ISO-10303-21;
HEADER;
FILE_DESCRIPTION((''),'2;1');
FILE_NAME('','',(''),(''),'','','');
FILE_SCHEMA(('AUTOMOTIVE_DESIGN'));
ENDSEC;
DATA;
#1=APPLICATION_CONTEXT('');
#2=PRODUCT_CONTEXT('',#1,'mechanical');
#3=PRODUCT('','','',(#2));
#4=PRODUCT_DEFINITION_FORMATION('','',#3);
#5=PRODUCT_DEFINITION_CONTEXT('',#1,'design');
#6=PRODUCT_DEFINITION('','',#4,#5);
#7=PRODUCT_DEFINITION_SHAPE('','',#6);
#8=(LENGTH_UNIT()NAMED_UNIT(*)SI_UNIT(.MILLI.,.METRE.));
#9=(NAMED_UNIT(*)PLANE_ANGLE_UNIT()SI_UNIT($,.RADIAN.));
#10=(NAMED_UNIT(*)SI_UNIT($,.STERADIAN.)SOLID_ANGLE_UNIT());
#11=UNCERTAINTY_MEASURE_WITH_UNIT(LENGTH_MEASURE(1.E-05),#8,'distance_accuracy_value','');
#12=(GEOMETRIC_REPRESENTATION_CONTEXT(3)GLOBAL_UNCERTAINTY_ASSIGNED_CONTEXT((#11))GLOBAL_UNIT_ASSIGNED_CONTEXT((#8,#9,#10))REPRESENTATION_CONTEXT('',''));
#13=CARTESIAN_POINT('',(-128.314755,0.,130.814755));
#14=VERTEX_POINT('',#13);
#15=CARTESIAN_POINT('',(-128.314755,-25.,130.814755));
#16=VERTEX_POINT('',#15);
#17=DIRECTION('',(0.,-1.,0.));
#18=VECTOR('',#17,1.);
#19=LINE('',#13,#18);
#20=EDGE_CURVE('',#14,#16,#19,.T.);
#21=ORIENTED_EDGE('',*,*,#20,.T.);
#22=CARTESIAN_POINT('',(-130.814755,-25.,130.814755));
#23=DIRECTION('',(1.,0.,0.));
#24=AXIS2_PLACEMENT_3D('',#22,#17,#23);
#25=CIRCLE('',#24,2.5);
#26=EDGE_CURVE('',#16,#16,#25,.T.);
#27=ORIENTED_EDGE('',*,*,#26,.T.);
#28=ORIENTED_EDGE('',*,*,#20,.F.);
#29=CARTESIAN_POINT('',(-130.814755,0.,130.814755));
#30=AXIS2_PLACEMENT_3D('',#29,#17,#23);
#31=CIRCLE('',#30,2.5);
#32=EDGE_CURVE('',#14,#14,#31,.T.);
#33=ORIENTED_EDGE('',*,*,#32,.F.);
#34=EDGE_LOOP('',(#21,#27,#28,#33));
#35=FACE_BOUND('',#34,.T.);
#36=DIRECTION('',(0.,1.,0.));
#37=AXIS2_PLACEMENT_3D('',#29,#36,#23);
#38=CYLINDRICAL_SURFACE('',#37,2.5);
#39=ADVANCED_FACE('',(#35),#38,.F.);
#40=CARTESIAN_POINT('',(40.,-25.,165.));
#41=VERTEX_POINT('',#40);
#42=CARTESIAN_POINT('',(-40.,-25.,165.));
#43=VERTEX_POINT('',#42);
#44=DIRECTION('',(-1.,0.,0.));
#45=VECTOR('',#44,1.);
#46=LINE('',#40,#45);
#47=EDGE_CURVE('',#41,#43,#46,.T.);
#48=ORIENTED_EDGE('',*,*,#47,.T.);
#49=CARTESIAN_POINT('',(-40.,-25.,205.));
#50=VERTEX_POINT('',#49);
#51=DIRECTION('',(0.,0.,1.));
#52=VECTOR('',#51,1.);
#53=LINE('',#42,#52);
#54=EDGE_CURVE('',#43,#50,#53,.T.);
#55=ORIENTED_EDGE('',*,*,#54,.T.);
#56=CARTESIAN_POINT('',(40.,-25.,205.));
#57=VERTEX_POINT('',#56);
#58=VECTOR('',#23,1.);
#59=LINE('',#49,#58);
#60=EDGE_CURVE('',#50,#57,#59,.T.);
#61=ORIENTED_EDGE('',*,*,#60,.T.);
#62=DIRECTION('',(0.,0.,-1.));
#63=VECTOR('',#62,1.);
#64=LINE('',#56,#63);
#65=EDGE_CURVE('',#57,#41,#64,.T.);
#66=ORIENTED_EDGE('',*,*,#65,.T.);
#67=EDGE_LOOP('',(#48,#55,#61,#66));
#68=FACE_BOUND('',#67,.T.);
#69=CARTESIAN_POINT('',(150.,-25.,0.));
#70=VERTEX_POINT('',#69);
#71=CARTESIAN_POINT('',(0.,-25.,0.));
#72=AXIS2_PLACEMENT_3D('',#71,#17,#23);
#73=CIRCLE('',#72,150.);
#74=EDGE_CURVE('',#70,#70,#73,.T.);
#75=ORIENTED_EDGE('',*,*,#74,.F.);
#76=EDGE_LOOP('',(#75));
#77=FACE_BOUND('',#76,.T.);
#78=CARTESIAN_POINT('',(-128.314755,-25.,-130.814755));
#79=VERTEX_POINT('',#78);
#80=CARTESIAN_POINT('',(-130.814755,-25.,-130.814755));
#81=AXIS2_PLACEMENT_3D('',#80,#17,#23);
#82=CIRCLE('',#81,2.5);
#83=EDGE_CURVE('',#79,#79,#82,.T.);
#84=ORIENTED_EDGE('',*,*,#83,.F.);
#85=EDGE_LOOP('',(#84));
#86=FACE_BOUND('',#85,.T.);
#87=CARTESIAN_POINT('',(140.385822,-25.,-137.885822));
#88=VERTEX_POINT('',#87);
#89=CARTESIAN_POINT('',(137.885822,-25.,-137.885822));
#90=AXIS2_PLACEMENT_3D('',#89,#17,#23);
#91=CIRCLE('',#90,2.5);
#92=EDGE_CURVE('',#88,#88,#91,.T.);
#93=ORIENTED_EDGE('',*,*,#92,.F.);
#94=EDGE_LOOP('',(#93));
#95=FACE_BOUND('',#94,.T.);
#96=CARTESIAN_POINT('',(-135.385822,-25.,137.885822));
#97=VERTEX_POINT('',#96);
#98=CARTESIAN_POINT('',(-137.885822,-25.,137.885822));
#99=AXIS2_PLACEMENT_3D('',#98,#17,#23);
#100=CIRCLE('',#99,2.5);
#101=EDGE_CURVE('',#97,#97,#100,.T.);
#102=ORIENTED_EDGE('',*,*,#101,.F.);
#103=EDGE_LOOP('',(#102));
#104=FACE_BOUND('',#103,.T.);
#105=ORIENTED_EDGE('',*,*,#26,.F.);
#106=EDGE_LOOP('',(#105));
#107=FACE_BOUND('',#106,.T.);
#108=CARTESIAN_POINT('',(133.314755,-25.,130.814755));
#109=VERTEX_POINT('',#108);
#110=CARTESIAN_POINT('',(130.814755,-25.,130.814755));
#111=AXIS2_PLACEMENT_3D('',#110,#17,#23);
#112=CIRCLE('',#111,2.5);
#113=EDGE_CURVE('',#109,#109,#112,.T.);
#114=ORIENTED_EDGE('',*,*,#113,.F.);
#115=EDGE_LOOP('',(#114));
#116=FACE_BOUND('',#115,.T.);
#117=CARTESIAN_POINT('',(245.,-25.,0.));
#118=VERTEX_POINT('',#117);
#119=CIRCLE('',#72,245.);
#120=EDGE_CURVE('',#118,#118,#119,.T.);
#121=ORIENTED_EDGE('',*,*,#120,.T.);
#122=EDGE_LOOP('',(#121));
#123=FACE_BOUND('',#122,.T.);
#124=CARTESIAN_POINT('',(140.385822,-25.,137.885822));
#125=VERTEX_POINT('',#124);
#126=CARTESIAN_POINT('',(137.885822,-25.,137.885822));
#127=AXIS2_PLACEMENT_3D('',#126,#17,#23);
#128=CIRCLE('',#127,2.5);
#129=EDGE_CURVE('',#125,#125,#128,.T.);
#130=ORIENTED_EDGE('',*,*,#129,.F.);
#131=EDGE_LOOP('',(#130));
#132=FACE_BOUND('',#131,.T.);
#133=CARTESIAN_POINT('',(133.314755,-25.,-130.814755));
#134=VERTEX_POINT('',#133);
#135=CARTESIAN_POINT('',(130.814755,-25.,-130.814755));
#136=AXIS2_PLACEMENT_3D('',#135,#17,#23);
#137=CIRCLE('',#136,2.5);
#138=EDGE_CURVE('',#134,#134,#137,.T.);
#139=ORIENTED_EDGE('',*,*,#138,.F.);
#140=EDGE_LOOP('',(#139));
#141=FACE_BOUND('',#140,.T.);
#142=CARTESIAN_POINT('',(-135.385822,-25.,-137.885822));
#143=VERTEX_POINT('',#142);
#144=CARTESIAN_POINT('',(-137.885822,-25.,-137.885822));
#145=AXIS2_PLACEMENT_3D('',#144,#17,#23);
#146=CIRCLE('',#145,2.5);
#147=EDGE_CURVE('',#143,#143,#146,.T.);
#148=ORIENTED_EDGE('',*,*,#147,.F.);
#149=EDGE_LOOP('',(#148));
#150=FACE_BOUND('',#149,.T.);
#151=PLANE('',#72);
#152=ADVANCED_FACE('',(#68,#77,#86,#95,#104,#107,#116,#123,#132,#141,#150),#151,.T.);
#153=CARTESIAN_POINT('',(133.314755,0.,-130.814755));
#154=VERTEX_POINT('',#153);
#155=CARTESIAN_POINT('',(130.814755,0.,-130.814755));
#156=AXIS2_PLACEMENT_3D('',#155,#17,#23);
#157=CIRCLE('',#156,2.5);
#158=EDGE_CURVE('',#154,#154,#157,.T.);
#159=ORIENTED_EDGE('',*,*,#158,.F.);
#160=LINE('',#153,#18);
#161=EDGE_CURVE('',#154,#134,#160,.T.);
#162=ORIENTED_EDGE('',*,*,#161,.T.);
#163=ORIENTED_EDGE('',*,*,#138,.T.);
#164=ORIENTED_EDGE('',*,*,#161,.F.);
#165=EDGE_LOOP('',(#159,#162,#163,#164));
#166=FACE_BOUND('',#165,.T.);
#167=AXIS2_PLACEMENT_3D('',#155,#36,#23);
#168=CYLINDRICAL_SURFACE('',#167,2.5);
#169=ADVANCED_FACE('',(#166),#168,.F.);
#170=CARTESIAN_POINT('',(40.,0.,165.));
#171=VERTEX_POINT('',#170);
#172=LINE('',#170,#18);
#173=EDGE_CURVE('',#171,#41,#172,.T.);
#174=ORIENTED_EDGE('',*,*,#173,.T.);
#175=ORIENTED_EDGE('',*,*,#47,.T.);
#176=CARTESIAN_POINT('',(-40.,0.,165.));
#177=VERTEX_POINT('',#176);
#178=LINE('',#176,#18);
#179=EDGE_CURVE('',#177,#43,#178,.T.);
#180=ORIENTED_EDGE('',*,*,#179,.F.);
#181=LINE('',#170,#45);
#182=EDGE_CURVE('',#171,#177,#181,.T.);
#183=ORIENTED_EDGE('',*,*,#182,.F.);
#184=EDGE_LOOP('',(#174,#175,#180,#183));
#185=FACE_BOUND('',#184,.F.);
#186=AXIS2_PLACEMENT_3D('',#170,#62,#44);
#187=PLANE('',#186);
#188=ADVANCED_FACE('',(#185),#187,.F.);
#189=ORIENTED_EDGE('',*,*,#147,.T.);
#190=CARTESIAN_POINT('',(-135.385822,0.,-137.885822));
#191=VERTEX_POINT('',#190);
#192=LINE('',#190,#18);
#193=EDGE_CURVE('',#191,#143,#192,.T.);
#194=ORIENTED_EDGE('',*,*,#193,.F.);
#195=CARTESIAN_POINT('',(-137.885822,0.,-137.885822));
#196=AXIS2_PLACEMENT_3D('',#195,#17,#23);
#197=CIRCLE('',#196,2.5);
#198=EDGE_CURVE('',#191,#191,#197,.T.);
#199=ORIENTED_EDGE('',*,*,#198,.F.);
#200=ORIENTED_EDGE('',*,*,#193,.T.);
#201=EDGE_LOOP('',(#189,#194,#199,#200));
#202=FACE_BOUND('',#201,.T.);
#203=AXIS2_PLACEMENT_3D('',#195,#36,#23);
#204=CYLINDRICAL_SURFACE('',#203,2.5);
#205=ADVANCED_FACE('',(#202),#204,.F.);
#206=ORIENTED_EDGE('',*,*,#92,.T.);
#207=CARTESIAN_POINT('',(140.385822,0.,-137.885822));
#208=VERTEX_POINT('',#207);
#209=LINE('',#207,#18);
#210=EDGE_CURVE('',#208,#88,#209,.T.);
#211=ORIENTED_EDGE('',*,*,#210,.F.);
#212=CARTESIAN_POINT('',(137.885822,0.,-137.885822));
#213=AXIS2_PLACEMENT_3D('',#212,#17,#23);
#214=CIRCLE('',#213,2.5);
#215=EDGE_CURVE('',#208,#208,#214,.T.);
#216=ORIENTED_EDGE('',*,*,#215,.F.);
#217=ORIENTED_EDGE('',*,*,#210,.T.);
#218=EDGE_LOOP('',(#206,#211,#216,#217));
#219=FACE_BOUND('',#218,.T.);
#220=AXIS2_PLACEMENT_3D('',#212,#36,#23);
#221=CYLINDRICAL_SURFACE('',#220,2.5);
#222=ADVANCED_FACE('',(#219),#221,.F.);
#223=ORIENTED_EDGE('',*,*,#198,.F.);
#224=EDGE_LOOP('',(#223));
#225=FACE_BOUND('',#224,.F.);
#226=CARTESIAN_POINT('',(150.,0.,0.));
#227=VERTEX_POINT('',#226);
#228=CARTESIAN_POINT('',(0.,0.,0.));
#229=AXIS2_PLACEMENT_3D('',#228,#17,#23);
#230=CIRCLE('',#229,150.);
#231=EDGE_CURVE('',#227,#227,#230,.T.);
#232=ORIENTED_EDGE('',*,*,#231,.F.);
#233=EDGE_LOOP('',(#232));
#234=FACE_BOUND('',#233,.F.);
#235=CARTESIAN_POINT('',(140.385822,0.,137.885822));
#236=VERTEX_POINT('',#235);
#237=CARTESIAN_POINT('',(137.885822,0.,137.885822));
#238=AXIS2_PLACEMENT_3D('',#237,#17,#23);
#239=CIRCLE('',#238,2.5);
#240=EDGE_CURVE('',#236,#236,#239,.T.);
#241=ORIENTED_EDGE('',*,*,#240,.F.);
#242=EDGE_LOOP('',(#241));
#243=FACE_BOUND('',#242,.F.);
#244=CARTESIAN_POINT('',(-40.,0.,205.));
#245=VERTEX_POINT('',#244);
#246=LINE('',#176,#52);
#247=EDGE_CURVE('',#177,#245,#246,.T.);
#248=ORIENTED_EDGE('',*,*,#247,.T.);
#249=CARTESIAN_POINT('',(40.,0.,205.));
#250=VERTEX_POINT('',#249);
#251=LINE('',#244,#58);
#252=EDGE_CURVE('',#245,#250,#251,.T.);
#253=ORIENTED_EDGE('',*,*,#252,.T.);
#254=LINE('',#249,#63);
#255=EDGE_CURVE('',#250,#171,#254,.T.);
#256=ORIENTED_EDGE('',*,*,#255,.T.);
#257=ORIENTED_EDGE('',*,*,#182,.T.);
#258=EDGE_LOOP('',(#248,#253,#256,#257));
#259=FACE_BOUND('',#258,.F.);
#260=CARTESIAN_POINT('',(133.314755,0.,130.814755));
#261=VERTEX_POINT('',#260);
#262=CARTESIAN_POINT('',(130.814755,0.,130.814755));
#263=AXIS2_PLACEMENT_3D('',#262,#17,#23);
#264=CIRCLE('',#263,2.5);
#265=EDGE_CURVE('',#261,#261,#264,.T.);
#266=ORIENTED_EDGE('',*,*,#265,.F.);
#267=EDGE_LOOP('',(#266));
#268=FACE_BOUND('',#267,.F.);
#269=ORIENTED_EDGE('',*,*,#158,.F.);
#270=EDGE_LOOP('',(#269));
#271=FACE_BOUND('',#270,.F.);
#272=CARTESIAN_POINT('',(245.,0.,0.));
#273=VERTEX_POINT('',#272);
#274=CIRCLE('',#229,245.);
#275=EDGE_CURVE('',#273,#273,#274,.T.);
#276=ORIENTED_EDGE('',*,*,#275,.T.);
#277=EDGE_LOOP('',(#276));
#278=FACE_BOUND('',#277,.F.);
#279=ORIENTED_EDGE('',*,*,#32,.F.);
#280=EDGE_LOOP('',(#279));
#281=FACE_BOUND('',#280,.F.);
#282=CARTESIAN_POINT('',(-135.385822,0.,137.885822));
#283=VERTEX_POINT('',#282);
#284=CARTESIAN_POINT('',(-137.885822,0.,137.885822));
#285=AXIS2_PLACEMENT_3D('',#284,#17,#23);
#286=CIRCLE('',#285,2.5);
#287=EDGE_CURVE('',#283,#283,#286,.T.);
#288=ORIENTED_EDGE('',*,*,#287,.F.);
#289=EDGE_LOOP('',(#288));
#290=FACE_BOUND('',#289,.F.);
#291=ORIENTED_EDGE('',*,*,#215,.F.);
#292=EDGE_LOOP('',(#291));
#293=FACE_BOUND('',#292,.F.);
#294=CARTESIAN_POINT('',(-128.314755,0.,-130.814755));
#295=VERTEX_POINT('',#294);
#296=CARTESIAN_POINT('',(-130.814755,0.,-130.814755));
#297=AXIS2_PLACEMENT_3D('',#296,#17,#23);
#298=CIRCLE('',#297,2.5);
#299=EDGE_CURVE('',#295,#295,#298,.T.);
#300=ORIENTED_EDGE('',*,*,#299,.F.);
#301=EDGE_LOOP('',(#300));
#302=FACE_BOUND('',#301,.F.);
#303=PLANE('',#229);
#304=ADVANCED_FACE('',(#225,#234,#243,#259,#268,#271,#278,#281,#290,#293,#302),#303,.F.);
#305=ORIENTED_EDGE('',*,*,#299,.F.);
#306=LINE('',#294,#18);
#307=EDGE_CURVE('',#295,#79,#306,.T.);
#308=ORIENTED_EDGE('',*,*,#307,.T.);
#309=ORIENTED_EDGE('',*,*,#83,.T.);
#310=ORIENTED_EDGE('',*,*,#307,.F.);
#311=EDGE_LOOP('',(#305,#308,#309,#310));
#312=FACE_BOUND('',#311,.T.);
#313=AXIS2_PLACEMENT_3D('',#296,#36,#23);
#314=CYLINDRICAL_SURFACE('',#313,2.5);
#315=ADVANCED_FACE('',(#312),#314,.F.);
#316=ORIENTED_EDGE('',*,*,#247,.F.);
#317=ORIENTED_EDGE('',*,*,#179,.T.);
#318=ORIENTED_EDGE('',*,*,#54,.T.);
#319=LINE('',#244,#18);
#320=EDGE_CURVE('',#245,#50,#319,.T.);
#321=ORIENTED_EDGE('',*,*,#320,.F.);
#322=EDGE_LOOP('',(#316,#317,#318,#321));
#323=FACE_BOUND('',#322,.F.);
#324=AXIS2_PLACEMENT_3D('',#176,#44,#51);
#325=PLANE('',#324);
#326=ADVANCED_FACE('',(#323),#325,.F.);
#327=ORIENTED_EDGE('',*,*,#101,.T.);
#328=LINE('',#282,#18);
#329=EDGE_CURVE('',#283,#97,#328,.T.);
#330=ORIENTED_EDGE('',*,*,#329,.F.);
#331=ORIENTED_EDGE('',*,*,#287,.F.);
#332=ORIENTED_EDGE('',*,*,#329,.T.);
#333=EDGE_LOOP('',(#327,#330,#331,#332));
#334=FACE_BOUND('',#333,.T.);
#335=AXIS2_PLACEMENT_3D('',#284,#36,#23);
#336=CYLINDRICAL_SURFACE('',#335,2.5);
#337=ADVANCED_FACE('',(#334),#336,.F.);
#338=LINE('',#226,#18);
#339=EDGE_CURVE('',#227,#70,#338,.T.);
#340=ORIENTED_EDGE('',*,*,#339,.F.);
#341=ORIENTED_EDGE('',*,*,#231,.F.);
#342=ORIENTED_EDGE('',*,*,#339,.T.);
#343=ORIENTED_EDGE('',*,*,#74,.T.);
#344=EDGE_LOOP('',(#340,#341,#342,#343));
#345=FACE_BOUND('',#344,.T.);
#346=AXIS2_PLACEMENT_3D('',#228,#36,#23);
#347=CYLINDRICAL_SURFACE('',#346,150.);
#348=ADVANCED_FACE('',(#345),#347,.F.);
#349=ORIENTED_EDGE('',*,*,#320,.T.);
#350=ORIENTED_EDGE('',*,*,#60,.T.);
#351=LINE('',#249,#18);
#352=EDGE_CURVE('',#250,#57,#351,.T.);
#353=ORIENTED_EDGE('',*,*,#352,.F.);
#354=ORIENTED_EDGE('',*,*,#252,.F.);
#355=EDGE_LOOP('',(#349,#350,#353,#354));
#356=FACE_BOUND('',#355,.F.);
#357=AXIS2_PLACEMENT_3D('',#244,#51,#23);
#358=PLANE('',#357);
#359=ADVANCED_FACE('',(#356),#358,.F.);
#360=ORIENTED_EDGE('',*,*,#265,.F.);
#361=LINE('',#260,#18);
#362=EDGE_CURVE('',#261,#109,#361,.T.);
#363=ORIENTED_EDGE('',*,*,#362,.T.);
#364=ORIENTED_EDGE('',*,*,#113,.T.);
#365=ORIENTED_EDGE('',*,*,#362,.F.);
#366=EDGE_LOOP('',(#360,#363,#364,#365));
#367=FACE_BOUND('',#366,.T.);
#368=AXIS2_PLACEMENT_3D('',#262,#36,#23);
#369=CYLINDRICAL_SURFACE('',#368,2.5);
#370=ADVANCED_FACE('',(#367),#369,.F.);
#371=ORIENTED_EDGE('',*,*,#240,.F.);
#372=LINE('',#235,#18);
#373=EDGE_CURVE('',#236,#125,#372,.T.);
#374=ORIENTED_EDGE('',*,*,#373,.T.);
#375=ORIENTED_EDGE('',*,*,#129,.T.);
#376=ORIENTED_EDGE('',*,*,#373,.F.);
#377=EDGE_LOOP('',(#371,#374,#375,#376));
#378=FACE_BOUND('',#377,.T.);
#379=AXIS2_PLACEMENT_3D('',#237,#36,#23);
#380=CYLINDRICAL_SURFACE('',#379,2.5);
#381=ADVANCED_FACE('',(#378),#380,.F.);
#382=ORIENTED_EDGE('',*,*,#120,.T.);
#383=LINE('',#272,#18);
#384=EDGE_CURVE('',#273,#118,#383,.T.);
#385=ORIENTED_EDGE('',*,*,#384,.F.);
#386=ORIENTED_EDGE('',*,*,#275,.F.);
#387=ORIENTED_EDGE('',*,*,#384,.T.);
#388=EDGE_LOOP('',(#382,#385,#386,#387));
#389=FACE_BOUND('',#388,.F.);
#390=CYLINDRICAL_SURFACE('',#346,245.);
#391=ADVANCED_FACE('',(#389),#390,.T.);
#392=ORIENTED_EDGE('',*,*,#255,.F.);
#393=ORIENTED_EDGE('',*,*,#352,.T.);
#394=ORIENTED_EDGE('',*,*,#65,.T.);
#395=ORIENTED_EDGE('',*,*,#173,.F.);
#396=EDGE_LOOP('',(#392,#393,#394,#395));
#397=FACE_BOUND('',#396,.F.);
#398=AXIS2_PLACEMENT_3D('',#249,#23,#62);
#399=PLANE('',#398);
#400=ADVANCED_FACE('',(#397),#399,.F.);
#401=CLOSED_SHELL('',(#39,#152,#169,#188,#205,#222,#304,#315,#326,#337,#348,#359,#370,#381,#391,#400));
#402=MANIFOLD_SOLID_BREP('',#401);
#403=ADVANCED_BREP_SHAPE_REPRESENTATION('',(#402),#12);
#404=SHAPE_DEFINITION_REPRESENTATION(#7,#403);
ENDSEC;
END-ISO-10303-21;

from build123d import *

# Parameters (mm, degrees)
F0_R     = 245
F0_R_2   = 2.5
F0_R_3   = 150
F0_W     = 25
F0_H     = 10
F1_DEPTH = 25


with BuildPart() as f1:
    # F0 (on Front) → F1 (new body)
    with BuildSketch(Plane.XZ):
        Circle(F0_R)
        with Locations((-137.8858223314, -137.8858223314)):
            Circle(F0_R_2, mode=Mode.SUBTRACT)
        with Locations((-130.8147545195, -130.8147545195)):
            Circle(F0_R_2, mode=Mode.SUBTRACT)
        with Locations((137.8858223314, -137.8858223314)):
            Circle(F0_R_2, mode=Mode.SUBTRACT)
        with Locations((130.8147545195, -130.8147545195)):
            Circle(F0_R_2, mode=Mode.SUBTRACT)
        with Locations((-130.8147545195, 130.8147545195)):
            Circle(F0_R_2, mode=Mode.SUBTRACT)
        with Locations((-137.8858223314, 137.8858223314)):
            Circle(F0_R_2, mode=Mode.SUBTRACT)
        Circle(F0_R_3, mode=Mode.SUBTRACT)
        Polygon((40, 205), (40, 165), (-40, 165), (-40, 205), (-12.5, 205), (-12.5, 215), (12.5, 215), (12.5, 205), align=None, mode=Mode.SUBTRACT)
        with Locations((130.8147545195, 130.8147545195)):
            Circle(F0_R_2, mode=Mode.SUBTRACT)
        with Locations((137.8858223314, 137.8858223314)):
            Circle(F0_R_2, mode=Mode.SUBTRACT)
        with Locations((0, 210)):
            Rectangle(F0_W, F0_H)
    extrude(amount=F1_DEPTH)


solid = f1.part
